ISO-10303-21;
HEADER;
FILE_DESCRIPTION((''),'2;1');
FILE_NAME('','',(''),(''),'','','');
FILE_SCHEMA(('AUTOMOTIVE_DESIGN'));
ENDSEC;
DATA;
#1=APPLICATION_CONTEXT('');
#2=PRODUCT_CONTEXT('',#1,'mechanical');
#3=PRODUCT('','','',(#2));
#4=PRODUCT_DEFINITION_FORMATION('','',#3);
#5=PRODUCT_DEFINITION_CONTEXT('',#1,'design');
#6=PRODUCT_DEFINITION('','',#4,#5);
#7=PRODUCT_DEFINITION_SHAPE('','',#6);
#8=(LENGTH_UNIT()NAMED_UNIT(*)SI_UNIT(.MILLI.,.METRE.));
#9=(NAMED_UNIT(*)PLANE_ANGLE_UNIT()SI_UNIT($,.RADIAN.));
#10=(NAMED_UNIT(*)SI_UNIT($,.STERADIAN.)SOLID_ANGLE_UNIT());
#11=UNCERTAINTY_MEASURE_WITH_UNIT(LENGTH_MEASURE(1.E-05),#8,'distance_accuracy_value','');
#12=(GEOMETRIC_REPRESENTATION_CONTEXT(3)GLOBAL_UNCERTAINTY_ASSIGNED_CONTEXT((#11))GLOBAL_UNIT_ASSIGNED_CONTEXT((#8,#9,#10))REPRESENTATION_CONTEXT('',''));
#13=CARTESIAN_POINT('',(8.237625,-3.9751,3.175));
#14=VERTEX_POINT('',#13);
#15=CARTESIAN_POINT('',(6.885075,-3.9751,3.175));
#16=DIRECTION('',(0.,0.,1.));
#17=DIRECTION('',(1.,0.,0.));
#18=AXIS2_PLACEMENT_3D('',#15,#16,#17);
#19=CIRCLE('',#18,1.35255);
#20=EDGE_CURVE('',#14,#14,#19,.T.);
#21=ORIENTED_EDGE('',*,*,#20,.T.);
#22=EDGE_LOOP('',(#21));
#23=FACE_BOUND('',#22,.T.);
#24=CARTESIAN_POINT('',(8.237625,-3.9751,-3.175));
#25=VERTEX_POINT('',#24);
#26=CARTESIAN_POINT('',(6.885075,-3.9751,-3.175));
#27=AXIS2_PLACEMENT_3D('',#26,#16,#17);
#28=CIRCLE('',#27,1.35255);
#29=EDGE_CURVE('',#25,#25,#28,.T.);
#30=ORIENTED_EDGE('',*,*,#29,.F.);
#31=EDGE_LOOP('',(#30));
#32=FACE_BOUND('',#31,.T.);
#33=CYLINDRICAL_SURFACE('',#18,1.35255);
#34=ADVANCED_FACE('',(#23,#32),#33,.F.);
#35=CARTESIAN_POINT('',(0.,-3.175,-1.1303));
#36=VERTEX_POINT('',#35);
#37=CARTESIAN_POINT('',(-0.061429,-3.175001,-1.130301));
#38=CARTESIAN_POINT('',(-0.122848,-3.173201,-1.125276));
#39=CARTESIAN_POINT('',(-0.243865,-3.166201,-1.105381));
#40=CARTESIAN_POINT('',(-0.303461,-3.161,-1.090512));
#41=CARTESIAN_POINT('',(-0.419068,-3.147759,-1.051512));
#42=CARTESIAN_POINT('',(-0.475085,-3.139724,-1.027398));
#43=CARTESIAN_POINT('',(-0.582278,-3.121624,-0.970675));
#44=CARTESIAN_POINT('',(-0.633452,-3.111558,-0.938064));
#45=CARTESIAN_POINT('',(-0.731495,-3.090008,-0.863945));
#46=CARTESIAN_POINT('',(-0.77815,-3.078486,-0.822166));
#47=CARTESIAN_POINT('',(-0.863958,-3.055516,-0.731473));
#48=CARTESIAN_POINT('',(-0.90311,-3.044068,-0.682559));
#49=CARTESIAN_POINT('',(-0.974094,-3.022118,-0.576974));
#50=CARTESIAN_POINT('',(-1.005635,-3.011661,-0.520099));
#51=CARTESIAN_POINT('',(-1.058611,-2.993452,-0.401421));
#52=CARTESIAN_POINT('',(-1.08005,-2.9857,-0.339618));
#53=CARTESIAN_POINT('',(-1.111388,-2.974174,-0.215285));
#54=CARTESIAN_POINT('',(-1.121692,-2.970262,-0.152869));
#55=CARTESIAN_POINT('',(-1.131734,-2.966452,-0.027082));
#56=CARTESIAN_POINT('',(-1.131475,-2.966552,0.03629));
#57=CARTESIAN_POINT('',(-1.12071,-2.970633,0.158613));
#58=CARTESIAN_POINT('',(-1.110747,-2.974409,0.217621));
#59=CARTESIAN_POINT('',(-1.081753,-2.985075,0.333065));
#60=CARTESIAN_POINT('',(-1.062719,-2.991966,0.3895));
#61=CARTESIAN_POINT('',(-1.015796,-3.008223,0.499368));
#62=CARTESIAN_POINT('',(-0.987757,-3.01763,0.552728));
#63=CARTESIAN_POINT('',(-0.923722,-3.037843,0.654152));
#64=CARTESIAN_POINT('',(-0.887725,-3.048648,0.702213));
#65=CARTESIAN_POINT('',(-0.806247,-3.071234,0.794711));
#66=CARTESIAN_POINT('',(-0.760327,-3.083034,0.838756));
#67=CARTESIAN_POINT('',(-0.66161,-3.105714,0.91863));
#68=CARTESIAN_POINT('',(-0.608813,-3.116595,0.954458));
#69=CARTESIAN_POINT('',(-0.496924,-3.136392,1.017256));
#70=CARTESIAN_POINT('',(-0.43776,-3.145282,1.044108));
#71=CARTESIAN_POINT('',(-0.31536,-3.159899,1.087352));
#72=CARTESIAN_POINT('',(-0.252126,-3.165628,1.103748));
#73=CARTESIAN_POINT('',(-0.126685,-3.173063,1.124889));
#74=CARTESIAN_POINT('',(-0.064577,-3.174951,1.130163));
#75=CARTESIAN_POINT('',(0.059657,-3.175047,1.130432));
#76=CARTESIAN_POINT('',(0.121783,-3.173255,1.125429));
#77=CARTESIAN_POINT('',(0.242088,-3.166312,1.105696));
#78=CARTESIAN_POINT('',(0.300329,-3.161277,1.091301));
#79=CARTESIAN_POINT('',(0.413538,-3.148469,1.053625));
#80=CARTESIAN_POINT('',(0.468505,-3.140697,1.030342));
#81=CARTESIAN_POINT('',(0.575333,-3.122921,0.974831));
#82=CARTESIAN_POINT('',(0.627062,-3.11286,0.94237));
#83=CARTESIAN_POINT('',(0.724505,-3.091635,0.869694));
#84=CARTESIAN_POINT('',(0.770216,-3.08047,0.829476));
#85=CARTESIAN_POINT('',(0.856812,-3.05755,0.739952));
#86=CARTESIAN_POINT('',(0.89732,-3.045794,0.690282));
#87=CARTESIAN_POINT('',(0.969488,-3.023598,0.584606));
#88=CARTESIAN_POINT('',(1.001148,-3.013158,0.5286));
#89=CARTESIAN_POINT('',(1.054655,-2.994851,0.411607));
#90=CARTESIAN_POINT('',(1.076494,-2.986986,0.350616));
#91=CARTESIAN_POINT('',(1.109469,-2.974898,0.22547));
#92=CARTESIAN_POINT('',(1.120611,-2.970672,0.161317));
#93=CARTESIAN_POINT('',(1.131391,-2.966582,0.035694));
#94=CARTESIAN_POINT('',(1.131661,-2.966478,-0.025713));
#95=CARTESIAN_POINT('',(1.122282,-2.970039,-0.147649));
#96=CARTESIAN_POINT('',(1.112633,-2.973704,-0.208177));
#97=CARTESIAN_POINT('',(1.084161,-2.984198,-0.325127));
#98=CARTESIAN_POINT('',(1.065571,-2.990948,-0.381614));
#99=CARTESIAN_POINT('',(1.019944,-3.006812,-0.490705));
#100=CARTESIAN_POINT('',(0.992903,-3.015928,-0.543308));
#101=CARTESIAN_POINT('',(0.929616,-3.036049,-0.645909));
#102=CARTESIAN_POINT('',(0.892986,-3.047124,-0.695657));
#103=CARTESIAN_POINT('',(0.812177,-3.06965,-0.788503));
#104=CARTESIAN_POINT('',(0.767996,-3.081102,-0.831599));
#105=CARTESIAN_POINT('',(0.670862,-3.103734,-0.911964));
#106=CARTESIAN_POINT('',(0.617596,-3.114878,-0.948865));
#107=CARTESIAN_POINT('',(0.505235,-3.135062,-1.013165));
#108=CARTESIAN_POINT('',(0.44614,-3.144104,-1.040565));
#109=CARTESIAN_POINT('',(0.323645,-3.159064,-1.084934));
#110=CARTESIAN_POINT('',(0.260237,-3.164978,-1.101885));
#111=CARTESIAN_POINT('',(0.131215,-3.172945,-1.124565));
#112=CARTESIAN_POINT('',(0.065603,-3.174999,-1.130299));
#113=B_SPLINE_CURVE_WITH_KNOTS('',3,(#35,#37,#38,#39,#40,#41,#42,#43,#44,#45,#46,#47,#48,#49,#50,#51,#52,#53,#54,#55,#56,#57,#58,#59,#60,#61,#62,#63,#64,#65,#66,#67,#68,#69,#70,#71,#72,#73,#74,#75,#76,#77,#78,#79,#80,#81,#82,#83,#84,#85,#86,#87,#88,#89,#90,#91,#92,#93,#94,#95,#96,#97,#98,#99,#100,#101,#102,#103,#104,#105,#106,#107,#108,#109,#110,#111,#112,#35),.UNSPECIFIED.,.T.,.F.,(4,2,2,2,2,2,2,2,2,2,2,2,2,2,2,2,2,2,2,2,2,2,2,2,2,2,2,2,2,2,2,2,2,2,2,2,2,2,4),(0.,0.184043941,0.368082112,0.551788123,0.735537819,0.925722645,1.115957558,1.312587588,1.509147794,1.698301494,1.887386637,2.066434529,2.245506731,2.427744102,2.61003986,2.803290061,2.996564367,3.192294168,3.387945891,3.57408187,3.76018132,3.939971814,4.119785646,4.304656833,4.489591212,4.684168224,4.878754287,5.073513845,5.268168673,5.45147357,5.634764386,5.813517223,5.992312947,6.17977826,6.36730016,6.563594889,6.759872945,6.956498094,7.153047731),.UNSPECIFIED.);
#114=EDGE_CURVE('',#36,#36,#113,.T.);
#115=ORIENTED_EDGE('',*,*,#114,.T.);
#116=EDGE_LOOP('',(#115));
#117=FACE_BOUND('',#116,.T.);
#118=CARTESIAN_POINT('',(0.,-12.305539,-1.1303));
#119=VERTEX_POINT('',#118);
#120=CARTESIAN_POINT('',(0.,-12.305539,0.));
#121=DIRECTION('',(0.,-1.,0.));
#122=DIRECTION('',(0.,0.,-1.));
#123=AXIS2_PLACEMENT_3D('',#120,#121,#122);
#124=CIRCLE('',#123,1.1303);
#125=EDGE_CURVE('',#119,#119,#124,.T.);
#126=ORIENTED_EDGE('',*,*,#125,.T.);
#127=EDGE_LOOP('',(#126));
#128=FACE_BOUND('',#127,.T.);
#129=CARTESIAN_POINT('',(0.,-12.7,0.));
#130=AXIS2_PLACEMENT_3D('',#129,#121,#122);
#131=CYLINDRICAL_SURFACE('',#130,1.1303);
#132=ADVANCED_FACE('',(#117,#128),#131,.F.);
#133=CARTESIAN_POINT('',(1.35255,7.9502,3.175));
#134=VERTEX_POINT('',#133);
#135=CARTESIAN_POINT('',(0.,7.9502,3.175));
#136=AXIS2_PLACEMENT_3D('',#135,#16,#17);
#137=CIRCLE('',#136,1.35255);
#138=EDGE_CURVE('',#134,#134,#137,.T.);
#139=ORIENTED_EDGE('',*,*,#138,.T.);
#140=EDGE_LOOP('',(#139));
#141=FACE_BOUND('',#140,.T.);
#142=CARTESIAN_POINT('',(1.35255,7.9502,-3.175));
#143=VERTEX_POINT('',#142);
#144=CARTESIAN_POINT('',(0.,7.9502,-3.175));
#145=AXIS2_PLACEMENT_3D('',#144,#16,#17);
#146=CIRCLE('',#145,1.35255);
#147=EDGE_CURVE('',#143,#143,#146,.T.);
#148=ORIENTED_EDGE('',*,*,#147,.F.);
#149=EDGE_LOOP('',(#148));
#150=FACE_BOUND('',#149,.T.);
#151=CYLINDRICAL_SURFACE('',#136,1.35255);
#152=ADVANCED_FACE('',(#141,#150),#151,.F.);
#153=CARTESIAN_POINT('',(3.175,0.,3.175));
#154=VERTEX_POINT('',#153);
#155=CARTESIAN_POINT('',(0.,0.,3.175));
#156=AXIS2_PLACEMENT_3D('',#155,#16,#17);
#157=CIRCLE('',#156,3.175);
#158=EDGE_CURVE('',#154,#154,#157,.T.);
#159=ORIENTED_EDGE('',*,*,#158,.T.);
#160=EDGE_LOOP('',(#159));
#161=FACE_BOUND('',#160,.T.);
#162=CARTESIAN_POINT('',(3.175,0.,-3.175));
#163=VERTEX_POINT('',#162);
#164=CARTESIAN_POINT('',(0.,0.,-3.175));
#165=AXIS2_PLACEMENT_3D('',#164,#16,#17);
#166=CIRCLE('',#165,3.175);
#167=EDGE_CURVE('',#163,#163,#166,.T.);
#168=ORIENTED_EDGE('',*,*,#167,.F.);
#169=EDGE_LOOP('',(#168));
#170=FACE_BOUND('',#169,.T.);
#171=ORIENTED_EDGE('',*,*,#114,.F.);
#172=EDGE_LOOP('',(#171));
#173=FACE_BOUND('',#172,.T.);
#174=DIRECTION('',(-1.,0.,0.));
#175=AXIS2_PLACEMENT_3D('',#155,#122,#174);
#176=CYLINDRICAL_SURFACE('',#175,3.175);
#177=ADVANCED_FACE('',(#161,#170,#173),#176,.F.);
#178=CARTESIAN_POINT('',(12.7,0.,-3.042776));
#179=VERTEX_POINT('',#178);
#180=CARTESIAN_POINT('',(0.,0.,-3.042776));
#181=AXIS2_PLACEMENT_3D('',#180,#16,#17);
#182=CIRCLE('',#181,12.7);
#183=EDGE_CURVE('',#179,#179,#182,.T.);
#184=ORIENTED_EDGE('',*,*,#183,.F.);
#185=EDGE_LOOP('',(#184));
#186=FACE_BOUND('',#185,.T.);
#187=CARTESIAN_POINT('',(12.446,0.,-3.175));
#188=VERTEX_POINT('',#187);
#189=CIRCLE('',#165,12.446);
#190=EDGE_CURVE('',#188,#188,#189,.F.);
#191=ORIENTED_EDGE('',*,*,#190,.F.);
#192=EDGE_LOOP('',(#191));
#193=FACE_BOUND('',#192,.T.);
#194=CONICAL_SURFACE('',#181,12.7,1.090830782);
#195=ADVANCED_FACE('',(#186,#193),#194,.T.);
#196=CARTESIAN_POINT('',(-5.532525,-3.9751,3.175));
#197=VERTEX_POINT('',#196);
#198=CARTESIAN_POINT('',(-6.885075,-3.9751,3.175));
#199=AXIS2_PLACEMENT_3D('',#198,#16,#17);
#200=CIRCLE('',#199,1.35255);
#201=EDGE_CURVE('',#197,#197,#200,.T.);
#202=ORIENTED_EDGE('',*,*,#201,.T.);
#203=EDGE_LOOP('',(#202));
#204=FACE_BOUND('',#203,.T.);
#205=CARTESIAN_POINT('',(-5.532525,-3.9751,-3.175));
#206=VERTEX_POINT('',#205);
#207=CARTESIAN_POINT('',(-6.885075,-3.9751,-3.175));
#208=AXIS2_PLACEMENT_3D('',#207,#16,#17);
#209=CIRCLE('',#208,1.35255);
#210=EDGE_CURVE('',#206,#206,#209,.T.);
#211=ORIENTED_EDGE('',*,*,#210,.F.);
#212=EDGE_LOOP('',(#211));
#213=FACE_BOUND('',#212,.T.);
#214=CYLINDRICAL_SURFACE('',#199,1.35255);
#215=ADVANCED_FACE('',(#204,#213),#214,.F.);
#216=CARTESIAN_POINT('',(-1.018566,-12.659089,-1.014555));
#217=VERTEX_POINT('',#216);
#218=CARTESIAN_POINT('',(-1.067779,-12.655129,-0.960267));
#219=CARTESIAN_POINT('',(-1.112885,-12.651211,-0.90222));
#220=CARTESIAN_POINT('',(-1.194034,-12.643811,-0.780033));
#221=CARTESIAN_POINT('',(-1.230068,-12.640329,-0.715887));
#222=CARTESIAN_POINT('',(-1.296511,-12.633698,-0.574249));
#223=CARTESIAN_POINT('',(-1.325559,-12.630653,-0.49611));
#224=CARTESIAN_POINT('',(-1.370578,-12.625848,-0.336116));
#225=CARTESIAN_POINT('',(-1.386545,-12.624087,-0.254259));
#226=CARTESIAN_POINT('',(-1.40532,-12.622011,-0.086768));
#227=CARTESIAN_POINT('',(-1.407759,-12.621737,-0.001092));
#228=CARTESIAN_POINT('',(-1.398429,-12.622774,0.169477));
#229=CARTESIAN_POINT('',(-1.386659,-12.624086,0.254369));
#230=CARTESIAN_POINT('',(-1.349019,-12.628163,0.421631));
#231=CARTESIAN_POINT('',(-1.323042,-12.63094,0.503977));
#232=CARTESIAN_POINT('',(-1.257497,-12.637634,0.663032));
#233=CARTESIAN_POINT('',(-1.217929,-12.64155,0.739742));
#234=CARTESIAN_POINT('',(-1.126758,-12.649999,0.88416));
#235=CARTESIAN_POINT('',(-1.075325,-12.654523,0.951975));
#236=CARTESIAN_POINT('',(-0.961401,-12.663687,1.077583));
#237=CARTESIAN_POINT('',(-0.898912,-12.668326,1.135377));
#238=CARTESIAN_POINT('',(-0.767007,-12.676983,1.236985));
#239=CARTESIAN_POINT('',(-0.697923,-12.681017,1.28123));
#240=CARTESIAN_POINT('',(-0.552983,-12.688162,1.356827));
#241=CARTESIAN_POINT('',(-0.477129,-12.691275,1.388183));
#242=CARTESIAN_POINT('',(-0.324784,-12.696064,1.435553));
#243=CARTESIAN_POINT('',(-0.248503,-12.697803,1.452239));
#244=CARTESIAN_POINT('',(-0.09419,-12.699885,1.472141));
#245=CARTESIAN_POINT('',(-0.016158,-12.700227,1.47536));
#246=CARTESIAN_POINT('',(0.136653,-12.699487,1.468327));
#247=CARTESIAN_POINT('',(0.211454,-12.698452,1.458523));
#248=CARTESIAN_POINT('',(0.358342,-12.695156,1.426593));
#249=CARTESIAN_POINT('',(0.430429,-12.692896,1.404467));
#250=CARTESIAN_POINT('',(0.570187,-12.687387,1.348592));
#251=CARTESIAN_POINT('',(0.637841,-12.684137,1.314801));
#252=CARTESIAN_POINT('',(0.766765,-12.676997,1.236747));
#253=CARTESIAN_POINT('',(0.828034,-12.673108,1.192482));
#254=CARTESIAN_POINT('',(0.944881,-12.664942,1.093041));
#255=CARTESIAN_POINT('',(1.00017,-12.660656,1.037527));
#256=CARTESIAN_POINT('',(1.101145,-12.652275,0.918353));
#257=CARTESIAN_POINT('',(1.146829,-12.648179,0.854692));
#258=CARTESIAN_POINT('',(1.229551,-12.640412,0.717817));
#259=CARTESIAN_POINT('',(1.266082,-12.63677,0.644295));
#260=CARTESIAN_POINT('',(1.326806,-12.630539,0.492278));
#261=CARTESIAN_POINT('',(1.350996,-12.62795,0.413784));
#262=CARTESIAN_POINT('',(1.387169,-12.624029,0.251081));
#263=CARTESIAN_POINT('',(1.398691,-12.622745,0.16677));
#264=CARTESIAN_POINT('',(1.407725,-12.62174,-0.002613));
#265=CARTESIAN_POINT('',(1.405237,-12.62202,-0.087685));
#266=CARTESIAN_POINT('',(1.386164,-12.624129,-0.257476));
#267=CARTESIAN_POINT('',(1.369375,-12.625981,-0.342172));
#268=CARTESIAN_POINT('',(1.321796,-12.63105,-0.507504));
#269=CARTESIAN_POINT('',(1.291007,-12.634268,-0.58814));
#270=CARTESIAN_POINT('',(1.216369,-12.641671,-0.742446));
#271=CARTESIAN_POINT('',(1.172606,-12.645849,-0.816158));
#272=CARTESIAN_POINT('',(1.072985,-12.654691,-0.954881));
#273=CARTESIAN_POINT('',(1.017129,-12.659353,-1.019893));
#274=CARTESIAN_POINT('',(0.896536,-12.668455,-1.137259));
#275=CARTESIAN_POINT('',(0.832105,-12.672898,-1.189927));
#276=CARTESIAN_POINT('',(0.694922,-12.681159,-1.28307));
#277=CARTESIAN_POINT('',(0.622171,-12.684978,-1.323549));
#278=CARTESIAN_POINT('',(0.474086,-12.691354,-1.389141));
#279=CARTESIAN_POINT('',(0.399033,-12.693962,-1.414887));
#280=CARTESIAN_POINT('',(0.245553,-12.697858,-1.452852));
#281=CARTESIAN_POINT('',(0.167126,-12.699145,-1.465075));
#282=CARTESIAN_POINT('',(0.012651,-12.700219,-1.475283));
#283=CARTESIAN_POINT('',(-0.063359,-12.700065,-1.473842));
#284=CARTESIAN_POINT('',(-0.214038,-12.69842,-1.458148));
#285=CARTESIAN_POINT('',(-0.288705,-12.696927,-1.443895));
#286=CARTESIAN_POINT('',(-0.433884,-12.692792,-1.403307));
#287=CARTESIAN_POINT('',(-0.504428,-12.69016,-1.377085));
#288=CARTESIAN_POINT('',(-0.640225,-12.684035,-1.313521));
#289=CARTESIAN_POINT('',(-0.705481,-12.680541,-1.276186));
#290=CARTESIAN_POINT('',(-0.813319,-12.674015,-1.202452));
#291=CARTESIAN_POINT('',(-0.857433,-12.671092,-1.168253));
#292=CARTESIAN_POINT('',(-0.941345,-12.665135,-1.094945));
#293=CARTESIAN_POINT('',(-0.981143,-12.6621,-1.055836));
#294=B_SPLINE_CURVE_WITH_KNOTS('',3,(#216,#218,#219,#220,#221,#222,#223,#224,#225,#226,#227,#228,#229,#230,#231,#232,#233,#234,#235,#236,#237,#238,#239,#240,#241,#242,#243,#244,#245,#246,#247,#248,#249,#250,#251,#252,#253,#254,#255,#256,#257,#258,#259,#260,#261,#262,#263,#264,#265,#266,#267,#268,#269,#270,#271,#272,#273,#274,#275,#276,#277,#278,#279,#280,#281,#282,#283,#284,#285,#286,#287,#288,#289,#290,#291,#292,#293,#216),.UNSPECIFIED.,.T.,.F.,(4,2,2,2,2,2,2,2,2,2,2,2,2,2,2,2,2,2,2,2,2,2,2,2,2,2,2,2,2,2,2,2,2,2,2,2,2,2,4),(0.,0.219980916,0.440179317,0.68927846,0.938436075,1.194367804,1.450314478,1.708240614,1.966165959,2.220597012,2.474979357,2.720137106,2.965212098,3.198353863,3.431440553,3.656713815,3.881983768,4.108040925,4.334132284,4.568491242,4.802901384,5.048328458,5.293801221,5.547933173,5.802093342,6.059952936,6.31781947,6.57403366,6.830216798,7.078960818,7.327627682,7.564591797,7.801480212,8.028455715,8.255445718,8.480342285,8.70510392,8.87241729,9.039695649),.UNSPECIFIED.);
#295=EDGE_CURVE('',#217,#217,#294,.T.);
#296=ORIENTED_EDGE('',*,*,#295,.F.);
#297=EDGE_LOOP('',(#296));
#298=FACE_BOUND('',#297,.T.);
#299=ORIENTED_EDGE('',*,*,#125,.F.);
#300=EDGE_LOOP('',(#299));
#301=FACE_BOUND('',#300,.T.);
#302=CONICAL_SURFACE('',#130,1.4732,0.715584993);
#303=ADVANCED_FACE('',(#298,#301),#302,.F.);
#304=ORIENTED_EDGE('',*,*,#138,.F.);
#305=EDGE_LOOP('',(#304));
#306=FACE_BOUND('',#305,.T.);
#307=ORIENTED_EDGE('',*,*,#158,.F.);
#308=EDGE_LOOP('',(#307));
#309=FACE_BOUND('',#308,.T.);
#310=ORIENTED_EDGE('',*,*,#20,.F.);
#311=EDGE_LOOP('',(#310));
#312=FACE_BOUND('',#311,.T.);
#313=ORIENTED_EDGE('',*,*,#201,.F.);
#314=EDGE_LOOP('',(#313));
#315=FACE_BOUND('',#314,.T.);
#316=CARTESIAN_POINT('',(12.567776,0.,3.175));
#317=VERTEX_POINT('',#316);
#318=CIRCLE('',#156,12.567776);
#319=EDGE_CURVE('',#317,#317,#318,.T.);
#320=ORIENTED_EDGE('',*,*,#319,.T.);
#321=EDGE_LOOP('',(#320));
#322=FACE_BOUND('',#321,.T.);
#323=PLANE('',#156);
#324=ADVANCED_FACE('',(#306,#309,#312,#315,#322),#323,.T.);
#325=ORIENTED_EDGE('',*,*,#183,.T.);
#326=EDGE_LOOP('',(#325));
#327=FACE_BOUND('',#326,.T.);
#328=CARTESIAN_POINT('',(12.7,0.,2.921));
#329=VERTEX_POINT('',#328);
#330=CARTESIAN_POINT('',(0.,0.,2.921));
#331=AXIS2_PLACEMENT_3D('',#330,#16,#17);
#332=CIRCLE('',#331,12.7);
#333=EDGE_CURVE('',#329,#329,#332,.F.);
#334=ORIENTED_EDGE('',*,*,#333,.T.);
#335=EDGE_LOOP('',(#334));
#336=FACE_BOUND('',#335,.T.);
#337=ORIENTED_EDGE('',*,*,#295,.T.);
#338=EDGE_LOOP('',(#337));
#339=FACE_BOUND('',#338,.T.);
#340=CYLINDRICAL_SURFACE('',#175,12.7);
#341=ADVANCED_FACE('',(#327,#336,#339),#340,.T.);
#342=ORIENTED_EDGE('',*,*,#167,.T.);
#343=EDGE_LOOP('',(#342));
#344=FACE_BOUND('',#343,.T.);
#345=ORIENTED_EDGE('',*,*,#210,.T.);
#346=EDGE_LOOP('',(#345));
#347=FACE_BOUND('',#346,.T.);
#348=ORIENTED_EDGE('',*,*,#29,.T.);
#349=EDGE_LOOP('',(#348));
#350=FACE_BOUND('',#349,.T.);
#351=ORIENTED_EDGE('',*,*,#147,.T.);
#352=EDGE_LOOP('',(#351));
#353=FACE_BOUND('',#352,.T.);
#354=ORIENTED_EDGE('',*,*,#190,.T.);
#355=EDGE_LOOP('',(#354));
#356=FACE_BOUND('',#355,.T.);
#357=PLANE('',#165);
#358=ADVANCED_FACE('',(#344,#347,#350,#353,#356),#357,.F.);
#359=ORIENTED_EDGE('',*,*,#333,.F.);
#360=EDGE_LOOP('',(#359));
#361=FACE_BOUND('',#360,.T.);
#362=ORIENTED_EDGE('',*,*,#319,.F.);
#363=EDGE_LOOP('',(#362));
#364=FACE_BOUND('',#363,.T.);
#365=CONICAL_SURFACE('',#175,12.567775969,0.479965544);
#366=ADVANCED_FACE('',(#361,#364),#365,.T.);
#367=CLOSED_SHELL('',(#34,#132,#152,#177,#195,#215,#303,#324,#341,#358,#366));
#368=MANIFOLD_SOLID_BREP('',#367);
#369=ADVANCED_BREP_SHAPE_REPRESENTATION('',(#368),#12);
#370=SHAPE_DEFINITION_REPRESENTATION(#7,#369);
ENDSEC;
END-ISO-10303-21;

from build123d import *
from OCP.BRepFilletAPI import BRepFilletAPI_MakeChamfer

# Parameters (mm, degrees)
SKETCH2_R             = 12.7
SKETCH2_R_2           = 3.175
BOSS_EXTRUDE1_DEPTH   = 3.175
CHAMFER1_SIZE         = 0.254
CHAMFER1_SIZE2        = 0.132224031
F_6_32_TAPPED_HOLE1_D = 2.7051


# Read off the part's stored shape, not the designer's step: #4-40 Tapped Hole2
with BuildPart() as part:
    # Sketch2 → Boss-Extrude1 (new, symmetric)
    with BuildSketch(Plane.XY):
        Circle(SKETCH2_R)
        Circle(SKETCH2_R_2, mode=Mode.SUBTRACT)
    extrude(amount=BOSS_EXTRUDE1_DEPTH, both=True)

    # Chamfer1: one chamfer whose edges measure the first distance from different faces: ONE call of the kernel's chamfer builder (chamfer() names one face for all edges)
    chamfer1_edges_1 = [part.edges().sort_by_distance(p)[0] for p in [
        (-12.7, 0, -3.175),
    ]]
    chamfer1_side_1 = [part.faces().sort_by_distance(p)[0] for p in [
        (-12.340789755, 0, -3.175),
    ]]
    chamfer1_edges_2 = [part.edges().sort_by_distance(p)[0] for p in [
        (-12.7, 0, 3.175),
    ]]
    chamfer1_side_2 = [part.faces().sort_by_distance(p)[0] for p in [
        (-12.7, 0, 0),
    ]]
    chamfer1 = BRepFilletAPI_MakeChamfer(part.part.solid().wrapped)
    for e in chamfer1_edges_1:
        chamfer1.Add(CHAMFER1_SIZE, CHAMFER1_SIZE2, e.wrapped, chamfer1_side_1[0].wrapped)  # the first distance lies on this face
    for e in chamfer1_edges_2:
        chamfer1.Add(CHAMFER1_SIZE, CHAMFER1_SIZE2, e.wrapped, chamfer1_side_2[0].wrapped)  # the first distance lies on this face
    add(Compound.cast(chamfer1.Shape()), mode=Mode.REPLACE)

    # #6-32 Tapped Hole1 (through all)
    with Locations(Plane.XY.offset(3.175)):
        with Locations((0, 7.9502), (6.885075165, -3.9751), (-6.885075165, -3.9751)):
            Hole(F_6_32_TAPPED_HOLE1_D / 2)

    # #4-40 Tapped Hole2 outline → #4-40 Tapped Hole2 (revolve, cut)
    with BuildSketch(Plane.XY):
        Polygon((0, -12.700018831), (1.473216369, -12.700018831), (1.1303, -12.305538673), (1.1303, -2.966966147), (0, -2.966966147), align=None)
    revolve(axis=Axis((0, 0, 0), (0, 1, 0)), mode=Mode.SUBTRACT)


solid = part.part
